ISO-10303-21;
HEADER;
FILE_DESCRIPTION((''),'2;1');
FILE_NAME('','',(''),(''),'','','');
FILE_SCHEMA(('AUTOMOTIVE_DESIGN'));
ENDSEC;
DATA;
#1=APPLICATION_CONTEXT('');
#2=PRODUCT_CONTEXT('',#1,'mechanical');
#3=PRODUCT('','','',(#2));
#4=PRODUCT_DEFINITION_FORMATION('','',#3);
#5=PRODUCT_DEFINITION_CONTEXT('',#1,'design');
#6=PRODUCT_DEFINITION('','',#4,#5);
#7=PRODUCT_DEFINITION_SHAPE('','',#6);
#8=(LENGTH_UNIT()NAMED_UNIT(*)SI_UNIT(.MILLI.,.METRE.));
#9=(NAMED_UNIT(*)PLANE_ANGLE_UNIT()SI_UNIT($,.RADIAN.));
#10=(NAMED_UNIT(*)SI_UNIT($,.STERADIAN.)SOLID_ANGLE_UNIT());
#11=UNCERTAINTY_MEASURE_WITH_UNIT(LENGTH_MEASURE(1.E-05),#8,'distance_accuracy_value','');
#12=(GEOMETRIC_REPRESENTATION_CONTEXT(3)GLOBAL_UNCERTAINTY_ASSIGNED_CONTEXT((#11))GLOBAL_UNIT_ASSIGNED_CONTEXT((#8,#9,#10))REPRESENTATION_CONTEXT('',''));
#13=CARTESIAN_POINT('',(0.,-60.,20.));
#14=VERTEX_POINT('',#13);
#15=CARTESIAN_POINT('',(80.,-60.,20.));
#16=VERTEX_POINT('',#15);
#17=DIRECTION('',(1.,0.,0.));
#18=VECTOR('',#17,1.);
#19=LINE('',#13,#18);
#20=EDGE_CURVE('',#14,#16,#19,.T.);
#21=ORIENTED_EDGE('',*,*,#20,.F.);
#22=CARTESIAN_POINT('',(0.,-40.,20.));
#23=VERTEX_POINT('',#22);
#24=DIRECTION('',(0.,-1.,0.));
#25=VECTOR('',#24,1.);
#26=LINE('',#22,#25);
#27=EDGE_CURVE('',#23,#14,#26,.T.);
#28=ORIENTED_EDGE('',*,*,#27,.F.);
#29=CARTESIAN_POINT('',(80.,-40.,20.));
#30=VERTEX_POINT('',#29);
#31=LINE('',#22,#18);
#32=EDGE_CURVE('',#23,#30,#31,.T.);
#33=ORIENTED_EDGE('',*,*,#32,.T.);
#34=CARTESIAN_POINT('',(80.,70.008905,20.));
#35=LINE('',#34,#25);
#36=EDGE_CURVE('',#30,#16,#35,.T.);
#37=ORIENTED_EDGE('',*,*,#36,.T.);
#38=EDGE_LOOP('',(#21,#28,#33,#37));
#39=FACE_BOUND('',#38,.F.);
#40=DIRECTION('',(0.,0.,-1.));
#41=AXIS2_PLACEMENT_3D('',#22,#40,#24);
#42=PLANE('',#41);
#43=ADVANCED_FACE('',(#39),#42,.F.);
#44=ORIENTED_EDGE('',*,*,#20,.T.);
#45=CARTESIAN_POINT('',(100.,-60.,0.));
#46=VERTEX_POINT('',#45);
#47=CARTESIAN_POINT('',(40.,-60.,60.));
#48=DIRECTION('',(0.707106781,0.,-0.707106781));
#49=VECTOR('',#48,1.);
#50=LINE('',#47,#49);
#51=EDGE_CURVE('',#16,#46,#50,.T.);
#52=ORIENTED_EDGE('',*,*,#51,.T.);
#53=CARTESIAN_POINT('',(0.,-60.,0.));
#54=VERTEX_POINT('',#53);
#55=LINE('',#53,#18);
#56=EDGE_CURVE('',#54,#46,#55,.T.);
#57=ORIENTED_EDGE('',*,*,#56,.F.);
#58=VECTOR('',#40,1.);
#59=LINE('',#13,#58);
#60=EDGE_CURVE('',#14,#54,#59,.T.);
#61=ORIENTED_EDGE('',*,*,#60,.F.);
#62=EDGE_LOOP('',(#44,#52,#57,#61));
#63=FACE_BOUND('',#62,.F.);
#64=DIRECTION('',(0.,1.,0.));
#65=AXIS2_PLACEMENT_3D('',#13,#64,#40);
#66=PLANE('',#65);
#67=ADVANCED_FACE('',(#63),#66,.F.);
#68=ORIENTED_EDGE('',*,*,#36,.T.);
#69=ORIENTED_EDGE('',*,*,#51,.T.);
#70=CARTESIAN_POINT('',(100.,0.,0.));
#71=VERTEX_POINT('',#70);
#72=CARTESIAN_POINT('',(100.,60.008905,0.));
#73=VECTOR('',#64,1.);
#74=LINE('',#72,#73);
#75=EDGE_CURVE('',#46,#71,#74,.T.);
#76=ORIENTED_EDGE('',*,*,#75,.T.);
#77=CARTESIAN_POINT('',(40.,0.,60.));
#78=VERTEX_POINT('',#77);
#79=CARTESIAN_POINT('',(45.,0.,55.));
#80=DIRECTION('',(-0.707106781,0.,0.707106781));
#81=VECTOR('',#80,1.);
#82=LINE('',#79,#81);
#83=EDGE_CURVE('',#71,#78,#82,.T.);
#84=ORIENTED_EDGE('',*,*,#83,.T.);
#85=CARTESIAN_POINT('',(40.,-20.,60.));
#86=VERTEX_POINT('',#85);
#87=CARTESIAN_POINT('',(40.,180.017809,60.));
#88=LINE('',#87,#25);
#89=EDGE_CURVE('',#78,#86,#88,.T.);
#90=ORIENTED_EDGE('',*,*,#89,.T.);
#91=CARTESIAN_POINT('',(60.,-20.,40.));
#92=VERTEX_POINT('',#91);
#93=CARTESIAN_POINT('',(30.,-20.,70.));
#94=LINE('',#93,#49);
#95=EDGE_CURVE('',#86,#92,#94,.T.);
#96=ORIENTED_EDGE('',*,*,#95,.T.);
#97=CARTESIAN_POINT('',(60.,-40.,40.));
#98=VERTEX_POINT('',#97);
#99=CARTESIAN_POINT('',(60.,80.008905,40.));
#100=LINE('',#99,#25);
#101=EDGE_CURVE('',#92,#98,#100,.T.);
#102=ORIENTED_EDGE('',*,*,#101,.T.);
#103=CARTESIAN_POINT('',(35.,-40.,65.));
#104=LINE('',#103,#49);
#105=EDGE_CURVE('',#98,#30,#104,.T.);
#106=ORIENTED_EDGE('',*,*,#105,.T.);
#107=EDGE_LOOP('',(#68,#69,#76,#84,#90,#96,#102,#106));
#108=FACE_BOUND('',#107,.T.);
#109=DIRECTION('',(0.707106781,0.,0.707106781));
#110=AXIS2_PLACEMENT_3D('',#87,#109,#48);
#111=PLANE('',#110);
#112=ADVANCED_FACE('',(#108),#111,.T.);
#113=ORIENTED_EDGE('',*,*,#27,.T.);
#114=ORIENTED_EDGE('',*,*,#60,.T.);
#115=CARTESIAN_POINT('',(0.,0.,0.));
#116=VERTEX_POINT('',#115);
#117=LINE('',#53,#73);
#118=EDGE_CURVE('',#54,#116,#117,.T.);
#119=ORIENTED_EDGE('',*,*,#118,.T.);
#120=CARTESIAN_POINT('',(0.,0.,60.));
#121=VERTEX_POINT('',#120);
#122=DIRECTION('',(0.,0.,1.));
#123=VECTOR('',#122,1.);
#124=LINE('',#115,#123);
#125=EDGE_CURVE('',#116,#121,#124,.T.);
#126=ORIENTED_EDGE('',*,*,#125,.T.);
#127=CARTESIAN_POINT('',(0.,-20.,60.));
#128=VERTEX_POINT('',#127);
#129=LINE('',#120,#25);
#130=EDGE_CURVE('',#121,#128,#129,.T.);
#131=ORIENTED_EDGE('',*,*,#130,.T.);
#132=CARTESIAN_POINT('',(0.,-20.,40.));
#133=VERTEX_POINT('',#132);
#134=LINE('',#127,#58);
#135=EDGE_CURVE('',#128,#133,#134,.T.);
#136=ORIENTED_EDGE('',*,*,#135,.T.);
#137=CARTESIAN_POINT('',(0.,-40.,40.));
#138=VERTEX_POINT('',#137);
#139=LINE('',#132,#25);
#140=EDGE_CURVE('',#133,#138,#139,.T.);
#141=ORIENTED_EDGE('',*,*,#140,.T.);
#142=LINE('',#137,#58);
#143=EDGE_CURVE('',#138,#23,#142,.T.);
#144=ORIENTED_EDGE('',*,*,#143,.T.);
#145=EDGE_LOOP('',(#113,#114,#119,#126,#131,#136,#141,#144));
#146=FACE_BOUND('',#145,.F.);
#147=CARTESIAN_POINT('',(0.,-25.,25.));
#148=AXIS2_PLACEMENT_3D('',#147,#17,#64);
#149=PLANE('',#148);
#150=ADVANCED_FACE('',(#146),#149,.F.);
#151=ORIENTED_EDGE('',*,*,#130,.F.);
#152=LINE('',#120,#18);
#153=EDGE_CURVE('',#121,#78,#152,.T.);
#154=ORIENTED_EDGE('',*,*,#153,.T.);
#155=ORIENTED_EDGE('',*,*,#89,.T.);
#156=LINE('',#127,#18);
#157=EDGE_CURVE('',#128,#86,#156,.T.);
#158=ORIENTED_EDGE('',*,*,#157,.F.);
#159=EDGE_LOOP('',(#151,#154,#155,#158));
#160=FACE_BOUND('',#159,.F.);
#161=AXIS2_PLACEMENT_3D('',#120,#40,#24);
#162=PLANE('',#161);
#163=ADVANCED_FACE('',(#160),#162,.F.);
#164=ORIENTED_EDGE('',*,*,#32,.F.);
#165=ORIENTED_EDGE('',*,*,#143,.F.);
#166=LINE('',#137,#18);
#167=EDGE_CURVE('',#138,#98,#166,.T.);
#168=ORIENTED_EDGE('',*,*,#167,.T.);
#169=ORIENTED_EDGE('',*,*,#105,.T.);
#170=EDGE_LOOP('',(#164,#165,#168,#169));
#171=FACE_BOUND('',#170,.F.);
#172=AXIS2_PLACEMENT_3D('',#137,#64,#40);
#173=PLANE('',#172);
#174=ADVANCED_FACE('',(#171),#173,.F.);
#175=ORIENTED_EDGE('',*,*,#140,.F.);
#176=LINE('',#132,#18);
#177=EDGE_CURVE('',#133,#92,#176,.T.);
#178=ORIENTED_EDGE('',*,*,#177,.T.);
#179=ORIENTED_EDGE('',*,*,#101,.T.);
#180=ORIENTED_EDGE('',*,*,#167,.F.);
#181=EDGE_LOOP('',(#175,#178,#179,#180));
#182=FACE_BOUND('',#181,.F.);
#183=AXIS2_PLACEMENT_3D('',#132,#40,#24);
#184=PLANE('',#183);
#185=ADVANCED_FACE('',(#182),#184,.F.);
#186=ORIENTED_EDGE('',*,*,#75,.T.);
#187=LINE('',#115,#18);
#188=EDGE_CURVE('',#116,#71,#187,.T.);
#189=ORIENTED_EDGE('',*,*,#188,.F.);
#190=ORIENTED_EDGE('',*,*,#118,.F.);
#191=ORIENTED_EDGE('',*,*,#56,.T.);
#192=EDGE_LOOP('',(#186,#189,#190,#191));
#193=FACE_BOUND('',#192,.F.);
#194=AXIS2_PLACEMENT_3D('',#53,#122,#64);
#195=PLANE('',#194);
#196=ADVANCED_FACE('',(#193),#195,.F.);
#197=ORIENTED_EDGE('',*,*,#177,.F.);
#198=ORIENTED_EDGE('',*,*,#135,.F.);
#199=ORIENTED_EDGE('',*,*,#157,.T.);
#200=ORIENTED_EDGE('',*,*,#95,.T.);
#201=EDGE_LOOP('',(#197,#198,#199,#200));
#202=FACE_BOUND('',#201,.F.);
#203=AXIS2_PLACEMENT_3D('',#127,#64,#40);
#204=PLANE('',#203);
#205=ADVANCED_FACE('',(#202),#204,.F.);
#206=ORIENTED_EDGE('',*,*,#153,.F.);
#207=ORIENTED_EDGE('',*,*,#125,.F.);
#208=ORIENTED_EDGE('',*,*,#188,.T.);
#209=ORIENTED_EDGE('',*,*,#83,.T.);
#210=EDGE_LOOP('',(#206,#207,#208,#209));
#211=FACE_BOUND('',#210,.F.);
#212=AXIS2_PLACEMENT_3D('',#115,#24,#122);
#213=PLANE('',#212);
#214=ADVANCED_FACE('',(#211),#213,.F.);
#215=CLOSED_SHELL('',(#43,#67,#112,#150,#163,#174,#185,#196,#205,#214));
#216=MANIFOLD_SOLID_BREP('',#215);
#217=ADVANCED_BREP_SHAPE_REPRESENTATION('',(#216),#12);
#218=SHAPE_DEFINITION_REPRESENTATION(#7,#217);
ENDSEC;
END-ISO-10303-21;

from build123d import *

# Parameters (mm, degrees)
F1_DEPTH    = 110
F2_T1_DEPTH = 380.0356183152


# Not quite as in the source:
# - a fillet or chamfer that OpenCascade refuses, or shapes differently, is made with other operations: its cross-section is extruded or revolved along the edge and cut away or added


with BuildPart() as f1:
    # F0 (on Right) → F1 (new body)
    with BuildSketch(Plane.YZ):
        Polygon((-60, 0), (0, 0), (0, 60), (-20, 60), (-20, 40), (-40, 40), (-40, 20), (-60, 20), align=None)
    extrude(amount=F1_DEPTH)

    # F2: chamfer of 70 on 1 edges, made by hand

    # F2_s2 → F2_t1 (cut)
    with BuildSketch(Plane.XZ.offset(-180.0178091576)):
        Polygon((40, 60), (110, -10), (110, 60), align=None)
    extrude(amount=F2_T1_DEPTH, mode=Mode.SUBTRACT)


solid = f1.part
